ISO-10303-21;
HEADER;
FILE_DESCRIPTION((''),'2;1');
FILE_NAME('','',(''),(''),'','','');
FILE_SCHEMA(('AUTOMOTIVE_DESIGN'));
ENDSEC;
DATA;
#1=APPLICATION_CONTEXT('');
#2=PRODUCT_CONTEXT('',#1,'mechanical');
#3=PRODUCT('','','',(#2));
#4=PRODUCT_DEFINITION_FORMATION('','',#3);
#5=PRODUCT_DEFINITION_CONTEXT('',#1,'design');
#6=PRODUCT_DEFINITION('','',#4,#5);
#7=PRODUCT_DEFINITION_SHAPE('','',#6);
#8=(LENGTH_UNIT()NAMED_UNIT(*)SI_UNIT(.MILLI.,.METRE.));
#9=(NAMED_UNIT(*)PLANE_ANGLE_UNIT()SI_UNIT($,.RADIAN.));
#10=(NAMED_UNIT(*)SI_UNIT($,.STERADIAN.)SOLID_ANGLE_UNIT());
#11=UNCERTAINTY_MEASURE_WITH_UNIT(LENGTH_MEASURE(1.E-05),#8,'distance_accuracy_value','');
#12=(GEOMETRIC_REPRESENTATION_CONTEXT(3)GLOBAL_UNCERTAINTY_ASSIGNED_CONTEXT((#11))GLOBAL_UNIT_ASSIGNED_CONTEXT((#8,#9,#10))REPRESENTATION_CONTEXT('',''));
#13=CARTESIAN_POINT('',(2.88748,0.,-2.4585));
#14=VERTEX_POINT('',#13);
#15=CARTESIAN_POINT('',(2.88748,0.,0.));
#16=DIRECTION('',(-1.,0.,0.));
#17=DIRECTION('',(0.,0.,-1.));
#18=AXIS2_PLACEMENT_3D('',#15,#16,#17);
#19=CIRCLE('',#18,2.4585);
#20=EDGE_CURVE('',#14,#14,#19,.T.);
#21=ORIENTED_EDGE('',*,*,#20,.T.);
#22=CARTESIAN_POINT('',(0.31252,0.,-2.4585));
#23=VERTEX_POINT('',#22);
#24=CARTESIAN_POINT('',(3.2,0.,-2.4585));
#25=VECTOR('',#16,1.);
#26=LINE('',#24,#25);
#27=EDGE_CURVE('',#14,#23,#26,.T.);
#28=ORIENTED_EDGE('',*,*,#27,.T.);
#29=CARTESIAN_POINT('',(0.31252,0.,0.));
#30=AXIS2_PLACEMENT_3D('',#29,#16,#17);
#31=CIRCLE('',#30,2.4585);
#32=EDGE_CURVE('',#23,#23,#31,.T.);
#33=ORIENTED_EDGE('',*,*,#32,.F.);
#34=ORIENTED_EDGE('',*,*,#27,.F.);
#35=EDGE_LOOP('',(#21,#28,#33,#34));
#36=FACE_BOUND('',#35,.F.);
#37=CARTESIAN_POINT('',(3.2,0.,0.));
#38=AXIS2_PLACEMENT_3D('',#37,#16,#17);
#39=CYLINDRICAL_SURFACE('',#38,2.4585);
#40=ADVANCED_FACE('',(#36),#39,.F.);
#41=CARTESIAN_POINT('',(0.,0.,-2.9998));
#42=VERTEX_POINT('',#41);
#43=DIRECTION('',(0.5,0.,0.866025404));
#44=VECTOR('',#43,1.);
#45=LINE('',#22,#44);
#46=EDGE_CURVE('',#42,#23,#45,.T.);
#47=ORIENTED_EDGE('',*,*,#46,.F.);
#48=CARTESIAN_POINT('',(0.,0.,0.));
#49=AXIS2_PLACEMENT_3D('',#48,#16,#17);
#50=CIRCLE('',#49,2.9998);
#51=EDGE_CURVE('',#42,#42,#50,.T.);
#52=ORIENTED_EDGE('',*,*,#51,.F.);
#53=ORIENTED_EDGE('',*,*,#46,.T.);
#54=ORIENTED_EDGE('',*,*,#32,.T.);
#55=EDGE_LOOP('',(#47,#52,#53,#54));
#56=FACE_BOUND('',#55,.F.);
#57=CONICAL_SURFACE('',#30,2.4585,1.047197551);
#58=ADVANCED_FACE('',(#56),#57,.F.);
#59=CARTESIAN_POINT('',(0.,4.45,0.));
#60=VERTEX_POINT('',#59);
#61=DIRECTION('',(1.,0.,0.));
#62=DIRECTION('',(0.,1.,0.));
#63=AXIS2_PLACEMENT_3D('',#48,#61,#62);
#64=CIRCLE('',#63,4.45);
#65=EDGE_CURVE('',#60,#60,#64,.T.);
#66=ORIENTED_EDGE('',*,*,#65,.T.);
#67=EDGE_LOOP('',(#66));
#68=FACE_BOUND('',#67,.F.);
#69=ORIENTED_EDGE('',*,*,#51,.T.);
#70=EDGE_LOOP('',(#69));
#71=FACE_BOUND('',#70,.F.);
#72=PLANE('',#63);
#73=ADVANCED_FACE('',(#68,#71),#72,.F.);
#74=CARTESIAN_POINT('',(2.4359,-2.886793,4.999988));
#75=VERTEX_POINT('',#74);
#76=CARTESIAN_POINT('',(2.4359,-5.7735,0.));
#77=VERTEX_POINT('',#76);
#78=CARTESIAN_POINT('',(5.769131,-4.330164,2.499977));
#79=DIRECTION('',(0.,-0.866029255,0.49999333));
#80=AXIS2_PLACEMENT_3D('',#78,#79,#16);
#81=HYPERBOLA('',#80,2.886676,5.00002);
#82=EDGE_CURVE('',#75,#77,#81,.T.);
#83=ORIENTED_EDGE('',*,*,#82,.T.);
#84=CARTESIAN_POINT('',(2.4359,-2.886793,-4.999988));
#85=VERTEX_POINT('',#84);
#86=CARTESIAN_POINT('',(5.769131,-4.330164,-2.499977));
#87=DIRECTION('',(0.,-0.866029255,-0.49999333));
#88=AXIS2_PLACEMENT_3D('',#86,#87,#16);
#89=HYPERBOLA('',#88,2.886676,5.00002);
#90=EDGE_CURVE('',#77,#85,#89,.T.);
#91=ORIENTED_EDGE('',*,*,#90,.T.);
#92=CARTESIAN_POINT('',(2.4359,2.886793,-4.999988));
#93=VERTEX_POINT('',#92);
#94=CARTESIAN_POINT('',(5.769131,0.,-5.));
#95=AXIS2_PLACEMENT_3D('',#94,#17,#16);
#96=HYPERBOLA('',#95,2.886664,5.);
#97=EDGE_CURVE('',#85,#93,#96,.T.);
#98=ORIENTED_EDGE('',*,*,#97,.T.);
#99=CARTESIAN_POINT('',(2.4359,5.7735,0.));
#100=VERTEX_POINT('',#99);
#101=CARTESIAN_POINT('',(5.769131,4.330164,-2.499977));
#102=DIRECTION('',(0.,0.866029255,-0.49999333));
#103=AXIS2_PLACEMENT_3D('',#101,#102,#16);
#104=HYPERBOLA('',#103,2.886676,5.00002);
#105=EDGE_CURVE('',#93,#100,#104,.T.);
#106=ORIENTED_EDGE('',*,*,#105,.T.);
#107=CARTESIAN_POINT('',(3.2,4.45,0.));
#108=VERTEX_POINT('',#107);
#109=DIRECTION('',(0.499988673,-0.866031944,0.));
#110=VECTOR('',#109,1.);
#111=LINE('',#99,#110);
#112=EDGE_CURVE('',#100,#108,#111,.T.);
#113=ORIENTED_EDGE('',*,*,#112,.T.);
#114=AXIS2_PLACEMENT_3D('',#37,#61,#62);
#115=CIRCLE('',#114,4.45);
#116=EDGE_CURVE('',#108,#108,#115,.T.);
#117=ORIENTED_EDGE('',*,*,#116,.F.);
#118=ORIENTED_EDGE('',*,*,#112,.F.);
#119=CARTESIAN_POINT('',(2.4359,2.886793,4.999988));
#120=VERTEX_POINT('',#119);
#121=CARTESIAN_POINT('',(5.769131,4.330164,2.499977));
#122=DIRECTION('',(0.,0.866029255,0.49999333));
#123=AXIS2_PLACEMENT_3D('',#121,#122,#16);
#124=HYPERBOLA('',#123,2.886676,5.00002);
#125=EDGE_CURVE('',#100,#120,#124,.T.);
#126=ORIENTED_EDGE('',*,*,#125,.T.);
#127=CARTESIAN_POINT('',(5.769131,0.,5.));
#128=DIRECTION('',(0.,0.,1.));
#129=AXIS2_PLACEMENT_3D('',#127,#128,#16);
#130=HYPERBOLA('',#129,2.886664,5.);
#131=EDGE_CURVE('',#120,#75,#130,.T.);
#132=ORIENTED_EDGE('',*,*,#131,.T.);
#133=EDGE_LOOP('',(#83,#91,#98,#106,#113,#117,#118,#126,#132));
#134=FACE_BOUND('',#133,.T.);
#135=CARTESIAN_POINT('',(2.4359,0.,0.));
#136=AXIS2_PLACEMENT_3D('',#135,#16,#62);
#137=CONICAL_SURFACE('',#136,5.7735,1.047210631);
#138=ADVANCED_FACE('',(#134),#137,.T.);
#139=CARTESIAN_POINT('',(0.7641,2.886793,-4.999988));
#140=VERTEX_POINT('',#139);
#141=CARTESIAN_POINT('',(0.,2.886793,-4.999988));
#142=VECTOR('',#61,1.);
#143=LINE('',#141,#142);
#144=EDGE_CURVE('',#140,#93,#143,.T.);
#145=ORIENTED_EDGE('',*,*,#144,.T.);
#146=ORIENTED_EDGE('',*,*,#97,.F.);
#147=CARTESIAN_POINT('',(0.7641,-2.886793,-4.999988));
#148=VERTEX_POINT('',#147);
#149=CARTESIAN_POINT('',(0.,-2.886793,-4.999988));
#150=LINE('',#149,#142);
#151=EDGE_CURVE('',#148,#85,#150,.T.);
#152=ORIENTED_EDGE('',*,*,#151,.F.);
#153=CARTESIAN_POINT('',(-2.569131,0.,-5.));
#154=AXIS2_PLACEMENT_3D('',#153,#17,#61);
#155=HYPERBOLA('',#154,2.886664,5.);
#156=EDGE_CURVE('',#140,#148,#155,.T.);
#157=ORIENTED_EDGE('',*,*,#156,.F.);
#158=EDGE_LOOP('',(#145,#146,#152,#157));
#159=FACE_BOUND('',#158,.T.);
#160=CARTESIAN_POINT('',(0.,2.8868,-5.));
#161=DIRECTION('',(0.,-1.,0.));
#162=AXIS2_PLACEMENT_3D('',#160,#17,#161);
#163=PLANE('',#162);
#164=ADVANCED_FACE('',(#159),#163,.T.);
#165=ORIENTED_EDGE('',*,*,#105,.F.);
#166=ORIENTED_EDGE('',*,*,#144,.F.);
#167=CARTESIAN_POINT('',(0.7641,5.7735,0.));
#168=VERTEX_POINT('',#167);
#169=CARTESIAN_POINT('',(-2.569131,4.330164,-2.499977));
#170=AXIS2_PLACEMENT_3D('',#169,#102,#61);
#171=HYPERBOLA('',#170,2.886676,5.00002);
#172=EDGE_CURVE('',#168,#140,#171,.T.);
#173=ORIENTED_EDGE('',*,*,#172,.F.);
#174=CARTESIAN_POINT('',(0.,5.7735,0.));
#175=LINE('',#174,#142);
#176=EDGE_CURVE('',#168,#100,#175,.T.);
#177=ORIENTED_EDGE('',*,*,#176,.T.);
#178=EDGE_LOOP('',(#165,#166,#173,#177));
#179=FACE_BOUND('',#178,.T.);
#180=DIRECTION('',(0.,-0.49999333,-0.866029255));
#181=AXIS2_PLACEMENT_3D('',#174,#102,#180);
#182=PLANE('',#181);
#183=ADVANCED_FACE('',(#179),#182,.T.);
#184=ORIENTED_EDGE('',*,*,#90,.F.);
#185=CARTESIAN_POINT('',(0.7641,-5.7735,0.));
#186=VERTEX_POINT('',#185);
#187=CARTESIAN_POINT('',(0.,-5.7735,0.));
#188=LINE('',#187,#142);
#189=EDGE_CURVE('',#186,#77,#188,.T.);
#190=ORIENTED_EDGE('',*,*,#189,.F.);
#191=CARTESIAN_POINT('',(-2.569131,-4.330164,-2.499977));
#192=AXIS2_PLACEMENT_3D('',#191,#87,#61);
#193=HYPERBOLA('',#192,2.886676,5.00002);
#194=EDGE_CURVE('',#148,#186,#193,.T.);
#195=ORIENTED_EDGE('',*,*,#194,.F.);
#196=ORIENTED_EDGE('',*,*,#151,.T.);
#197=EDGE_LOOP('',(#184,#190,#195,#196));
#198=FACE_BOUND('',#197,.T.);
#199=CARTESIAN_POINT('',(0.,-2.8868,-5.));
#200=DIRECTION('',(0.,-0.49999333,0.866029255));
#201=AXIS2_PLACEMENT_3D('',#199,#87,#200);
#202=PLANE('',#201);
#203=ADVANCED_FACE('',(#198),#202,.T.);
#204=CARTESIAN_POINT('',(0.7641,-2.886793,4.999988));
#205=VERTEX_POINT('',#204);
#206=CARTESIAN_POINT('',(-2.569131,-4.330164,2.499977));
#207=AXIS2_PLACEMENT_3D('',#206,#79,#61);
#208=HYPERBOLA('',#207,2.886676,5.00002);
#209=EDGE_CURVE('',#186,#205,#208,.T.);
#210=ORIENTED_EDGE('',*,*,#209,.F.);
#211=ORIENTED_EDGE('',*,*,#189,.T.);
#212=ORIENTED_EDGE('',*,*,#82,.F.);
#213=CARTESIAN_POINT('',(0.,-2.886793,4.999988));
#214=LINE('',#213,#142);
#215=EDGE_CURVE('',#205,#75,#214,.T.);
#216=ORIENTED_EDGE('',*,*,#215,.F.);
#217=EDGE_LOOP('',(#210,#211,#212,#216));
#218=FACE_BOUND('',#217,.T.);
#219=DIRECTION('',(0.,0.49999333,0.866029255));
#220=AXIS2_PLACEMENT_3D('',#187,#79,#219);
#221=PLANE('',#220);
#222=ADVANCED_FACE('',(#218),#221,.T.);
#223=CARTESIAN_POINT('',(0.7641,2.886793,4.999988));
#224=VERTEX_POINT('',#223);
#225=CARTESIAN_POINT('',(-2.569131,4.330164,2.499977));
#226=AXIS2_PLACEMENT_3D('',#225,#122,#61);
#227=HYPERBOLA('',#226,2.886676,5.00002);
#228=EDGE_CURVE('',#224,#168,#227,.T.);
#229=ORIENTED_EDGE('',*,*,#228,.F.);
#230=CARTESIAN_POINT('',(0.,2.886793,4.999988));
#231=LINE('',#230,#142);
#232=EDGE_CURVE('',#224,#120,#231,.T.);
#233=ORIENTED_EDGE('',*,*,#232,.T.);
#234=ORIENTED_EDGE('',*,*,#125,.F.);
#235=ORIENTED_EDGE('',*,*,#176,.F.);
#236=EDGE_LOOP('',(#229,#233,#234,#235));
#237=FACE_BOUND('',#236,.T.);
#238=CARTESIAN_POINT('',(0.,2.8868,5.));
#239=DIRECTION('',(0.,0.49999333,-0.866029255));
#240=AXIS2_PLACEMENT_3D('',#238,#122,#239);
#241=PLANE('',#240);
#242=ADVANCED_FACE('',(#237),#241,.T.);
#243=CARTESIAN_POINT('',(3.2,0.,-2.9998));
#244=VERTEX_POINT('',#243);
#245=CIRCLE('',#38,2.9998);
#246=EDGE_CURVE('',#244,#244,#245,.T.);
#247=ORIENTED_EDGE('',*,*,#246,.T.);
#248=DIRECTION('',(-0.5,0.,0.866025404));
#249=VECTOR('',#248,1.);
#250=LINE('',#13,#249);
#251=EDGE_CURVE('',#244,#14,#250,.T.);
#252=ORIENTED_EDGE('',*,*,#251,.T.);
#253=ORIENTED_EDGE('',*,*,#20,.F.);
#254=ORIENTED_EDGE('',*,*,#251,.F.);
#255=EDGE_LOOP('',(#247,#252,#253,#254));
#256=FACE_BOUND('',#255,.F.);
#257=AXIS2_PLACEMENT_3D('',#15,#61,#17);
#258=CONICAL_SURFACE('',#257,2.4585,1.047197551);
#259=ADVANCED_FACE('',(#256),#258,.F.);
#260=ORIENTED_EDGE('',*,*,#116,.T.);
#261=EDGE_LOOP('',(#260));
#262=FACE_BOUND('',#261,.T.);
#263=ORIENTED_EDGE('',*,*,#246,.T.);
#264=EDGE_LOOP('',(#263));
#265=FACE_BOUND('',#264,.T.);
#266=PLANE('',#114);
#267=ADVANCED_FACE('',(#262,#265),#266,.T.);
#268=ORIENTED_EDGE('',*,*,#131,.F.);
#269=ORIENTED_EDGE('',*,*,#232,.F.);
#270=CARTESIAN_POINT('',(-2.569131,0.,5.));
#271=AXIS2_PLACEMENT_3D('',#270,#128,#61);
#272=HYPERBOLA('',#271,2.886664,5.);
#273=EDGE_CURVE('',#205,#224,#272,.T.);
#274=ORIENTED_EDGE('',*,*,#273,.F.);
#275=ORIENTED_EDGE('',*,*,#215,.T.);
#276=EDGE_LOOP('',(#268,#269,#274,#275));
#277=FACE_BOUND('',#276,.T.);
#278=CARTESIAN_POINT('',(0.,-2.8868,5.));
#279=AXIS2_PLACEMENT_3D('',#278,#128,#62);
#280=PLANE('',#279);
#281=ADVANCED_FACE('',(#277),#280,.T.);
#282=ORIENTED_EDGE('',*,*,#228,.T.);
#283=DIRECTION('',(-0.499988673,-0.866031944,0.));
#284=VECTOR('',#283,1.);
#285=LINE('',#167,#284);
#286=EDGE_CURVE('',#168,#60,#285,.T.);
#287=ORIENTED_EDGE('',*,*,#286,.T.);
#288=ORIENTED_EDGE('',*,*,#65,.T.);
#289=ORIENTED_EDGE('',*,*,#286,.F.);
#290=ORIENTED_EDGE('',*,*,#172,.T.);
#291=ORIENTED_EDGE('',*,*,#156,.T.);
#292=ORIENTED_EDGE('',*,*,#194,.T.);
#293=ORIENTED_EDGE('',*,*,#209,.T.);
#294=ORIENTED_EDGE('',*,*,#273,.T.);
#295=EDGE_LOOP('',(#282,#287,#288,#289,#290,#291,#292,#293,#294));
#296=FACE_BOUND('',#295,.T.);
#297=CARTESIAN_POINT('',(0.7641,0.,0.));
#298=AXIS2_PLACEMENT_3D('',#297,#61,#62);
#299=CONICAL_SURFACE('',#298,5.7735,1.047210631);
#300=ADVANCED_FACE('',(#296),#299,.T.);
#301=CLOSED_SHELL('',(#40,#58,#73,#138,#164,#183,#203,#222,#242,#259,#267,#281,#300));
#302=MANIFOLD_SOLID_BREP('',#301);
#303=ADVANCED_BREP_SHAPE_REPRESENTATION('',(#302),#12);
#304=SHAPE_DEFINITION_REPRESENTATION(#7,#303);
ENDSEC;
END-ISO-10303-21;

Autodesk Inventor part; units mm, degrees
ref_plane "YZ Plane" through (0, 0, 0) normal (1, 0, 0) x (0, 1, 0)
ref_plane "XZ Plane" through (0, 0, 0) normal (0, 1, 0) x (-1, 0, 0)
sketch "Эскиз1" plane through (0, 0, 0) normal (1, 0, 0) x (0, 1, 0)
  line L0 (-5.7735, 0) -> (-2.8868, 5)
  line L1 (-2.8868, 5) -> (2.8868, 5)
  line L2 (2.8868, 5) -> (5.7735, 0)
  line L3 (5.7735, 0) -> (2.8868, -5)
  line L4 (2.8868, -5) -> (-2.8868, -5)
  line L5 (-2.8868, -5) -> (-5.7735, 0)
  point P0 (0, 0)
  point P1 (0, 0)
  dimension "d0" = 11.547
extrude "Базовый элемент" add sketch "Эскиз1" along normal blind 3.2
sketch "Эскиз2" plane through (0, 0, 0) normal (0, 0, 1) x (1, 0, 0)
  line L0 (0, 2.8868) -> (0, 5.7735) projected
  line L1 (0, 5.7735) -> (3.2, 5.7735) projected
  line L2 (3.2, 2.8868) -> (3.2, 5.7735) projected
  line L3 (-0.64, 0) -> (3.84, 0) projected
  line L4 (0.7641, 5.7735) -> (0, 4.45)
  line L5 (2.4359, 5.7735) -> (3.2, 4.45)
  dimension "d3" = 30
  dimension "d4" = 30
  dimension "d5" = 8.9
  dimension "d6" = 8.9
revolve "Фаска1" cut sketch "Эскиз2" angle 360 about axis through (-10, 0, 0) along (1, 0, 0)
sketch "Эскиз3" plane through (3.2, 0, 0) normal (1, 0, 0) x (0, 0, -1)
  arc A0 (-0.625, -1.0825) -> (0.625, -1.0825) centre (0, 0) ccw projected
hole "Резьба" at (3.2, 0, 0) direction (-1, 0, 0) diameter 4.917 end through all thread size "M6x1" class "6H" standard "ISO Metric profile"
chamfer "Фаска2" distance 0.5413 angle 30 1 edges at (3.2, 0, 2.4585) measured on face at (3.2, 3.7371, -0.4538)
chamfer "Фаска3" distance 0.5413 angle 30 1 edges at (0, 0, 2.4585) measured on face at (0, 3.7371, -0.4538)
ref_plane "Work Plane1" through (-12.4358, 0, 0) normal (0, -0.8660254, -0.5) x (1, 0, 0)
equation "\"d0\" = 1.1547 * SW"
equation "\"d1\" = KOH"
equation "\"d3\" = ANG1"
equation "\"d4\" = ANG2"
equation "\"d5\" = SW0"
equation "\"d6\" = SW01"
equation "\"d8\" = -0.5 * GD1 + 0.5 * NND"
equation "\"d40\" = -0.5 * GD1 + 0.5 * NND"
equation "\"d10\" = -0.5 * GD1 + 0.5 * NND"
equation "\"d41\" = -0.5 * GD1 + 0.5 * NND"
equation "\"ANG1\" = 30deg"
equation "\"ANG2\" = 30deg"
equation "\"NND\" = 6"
equation "\"KOH\" = 3.2"
equation "\"SW0\" = 8.9"
equation "\"SW01\" = SW0"
equation "\"GUL\" = 0.541266 * PTC"
equation "\"LADI\" = 9.5"
equation "\"TOA\" = 30deg"
equation "\"FAWI\" = 30deg"
equation "\"PTC\" = 1"
equation "\"THREADDIA\" = 6"
equation "\"E0\" = 1.155 * SW"
equation "\"GAL\" = 0.541266 * PTC"
equation "\"SW\" = 10"
equation "\"GD1\" = 4.917468"
properties part number "Копия гайки M6-6H ГОСТ 5916-70" material "Сталь, мягкая"
